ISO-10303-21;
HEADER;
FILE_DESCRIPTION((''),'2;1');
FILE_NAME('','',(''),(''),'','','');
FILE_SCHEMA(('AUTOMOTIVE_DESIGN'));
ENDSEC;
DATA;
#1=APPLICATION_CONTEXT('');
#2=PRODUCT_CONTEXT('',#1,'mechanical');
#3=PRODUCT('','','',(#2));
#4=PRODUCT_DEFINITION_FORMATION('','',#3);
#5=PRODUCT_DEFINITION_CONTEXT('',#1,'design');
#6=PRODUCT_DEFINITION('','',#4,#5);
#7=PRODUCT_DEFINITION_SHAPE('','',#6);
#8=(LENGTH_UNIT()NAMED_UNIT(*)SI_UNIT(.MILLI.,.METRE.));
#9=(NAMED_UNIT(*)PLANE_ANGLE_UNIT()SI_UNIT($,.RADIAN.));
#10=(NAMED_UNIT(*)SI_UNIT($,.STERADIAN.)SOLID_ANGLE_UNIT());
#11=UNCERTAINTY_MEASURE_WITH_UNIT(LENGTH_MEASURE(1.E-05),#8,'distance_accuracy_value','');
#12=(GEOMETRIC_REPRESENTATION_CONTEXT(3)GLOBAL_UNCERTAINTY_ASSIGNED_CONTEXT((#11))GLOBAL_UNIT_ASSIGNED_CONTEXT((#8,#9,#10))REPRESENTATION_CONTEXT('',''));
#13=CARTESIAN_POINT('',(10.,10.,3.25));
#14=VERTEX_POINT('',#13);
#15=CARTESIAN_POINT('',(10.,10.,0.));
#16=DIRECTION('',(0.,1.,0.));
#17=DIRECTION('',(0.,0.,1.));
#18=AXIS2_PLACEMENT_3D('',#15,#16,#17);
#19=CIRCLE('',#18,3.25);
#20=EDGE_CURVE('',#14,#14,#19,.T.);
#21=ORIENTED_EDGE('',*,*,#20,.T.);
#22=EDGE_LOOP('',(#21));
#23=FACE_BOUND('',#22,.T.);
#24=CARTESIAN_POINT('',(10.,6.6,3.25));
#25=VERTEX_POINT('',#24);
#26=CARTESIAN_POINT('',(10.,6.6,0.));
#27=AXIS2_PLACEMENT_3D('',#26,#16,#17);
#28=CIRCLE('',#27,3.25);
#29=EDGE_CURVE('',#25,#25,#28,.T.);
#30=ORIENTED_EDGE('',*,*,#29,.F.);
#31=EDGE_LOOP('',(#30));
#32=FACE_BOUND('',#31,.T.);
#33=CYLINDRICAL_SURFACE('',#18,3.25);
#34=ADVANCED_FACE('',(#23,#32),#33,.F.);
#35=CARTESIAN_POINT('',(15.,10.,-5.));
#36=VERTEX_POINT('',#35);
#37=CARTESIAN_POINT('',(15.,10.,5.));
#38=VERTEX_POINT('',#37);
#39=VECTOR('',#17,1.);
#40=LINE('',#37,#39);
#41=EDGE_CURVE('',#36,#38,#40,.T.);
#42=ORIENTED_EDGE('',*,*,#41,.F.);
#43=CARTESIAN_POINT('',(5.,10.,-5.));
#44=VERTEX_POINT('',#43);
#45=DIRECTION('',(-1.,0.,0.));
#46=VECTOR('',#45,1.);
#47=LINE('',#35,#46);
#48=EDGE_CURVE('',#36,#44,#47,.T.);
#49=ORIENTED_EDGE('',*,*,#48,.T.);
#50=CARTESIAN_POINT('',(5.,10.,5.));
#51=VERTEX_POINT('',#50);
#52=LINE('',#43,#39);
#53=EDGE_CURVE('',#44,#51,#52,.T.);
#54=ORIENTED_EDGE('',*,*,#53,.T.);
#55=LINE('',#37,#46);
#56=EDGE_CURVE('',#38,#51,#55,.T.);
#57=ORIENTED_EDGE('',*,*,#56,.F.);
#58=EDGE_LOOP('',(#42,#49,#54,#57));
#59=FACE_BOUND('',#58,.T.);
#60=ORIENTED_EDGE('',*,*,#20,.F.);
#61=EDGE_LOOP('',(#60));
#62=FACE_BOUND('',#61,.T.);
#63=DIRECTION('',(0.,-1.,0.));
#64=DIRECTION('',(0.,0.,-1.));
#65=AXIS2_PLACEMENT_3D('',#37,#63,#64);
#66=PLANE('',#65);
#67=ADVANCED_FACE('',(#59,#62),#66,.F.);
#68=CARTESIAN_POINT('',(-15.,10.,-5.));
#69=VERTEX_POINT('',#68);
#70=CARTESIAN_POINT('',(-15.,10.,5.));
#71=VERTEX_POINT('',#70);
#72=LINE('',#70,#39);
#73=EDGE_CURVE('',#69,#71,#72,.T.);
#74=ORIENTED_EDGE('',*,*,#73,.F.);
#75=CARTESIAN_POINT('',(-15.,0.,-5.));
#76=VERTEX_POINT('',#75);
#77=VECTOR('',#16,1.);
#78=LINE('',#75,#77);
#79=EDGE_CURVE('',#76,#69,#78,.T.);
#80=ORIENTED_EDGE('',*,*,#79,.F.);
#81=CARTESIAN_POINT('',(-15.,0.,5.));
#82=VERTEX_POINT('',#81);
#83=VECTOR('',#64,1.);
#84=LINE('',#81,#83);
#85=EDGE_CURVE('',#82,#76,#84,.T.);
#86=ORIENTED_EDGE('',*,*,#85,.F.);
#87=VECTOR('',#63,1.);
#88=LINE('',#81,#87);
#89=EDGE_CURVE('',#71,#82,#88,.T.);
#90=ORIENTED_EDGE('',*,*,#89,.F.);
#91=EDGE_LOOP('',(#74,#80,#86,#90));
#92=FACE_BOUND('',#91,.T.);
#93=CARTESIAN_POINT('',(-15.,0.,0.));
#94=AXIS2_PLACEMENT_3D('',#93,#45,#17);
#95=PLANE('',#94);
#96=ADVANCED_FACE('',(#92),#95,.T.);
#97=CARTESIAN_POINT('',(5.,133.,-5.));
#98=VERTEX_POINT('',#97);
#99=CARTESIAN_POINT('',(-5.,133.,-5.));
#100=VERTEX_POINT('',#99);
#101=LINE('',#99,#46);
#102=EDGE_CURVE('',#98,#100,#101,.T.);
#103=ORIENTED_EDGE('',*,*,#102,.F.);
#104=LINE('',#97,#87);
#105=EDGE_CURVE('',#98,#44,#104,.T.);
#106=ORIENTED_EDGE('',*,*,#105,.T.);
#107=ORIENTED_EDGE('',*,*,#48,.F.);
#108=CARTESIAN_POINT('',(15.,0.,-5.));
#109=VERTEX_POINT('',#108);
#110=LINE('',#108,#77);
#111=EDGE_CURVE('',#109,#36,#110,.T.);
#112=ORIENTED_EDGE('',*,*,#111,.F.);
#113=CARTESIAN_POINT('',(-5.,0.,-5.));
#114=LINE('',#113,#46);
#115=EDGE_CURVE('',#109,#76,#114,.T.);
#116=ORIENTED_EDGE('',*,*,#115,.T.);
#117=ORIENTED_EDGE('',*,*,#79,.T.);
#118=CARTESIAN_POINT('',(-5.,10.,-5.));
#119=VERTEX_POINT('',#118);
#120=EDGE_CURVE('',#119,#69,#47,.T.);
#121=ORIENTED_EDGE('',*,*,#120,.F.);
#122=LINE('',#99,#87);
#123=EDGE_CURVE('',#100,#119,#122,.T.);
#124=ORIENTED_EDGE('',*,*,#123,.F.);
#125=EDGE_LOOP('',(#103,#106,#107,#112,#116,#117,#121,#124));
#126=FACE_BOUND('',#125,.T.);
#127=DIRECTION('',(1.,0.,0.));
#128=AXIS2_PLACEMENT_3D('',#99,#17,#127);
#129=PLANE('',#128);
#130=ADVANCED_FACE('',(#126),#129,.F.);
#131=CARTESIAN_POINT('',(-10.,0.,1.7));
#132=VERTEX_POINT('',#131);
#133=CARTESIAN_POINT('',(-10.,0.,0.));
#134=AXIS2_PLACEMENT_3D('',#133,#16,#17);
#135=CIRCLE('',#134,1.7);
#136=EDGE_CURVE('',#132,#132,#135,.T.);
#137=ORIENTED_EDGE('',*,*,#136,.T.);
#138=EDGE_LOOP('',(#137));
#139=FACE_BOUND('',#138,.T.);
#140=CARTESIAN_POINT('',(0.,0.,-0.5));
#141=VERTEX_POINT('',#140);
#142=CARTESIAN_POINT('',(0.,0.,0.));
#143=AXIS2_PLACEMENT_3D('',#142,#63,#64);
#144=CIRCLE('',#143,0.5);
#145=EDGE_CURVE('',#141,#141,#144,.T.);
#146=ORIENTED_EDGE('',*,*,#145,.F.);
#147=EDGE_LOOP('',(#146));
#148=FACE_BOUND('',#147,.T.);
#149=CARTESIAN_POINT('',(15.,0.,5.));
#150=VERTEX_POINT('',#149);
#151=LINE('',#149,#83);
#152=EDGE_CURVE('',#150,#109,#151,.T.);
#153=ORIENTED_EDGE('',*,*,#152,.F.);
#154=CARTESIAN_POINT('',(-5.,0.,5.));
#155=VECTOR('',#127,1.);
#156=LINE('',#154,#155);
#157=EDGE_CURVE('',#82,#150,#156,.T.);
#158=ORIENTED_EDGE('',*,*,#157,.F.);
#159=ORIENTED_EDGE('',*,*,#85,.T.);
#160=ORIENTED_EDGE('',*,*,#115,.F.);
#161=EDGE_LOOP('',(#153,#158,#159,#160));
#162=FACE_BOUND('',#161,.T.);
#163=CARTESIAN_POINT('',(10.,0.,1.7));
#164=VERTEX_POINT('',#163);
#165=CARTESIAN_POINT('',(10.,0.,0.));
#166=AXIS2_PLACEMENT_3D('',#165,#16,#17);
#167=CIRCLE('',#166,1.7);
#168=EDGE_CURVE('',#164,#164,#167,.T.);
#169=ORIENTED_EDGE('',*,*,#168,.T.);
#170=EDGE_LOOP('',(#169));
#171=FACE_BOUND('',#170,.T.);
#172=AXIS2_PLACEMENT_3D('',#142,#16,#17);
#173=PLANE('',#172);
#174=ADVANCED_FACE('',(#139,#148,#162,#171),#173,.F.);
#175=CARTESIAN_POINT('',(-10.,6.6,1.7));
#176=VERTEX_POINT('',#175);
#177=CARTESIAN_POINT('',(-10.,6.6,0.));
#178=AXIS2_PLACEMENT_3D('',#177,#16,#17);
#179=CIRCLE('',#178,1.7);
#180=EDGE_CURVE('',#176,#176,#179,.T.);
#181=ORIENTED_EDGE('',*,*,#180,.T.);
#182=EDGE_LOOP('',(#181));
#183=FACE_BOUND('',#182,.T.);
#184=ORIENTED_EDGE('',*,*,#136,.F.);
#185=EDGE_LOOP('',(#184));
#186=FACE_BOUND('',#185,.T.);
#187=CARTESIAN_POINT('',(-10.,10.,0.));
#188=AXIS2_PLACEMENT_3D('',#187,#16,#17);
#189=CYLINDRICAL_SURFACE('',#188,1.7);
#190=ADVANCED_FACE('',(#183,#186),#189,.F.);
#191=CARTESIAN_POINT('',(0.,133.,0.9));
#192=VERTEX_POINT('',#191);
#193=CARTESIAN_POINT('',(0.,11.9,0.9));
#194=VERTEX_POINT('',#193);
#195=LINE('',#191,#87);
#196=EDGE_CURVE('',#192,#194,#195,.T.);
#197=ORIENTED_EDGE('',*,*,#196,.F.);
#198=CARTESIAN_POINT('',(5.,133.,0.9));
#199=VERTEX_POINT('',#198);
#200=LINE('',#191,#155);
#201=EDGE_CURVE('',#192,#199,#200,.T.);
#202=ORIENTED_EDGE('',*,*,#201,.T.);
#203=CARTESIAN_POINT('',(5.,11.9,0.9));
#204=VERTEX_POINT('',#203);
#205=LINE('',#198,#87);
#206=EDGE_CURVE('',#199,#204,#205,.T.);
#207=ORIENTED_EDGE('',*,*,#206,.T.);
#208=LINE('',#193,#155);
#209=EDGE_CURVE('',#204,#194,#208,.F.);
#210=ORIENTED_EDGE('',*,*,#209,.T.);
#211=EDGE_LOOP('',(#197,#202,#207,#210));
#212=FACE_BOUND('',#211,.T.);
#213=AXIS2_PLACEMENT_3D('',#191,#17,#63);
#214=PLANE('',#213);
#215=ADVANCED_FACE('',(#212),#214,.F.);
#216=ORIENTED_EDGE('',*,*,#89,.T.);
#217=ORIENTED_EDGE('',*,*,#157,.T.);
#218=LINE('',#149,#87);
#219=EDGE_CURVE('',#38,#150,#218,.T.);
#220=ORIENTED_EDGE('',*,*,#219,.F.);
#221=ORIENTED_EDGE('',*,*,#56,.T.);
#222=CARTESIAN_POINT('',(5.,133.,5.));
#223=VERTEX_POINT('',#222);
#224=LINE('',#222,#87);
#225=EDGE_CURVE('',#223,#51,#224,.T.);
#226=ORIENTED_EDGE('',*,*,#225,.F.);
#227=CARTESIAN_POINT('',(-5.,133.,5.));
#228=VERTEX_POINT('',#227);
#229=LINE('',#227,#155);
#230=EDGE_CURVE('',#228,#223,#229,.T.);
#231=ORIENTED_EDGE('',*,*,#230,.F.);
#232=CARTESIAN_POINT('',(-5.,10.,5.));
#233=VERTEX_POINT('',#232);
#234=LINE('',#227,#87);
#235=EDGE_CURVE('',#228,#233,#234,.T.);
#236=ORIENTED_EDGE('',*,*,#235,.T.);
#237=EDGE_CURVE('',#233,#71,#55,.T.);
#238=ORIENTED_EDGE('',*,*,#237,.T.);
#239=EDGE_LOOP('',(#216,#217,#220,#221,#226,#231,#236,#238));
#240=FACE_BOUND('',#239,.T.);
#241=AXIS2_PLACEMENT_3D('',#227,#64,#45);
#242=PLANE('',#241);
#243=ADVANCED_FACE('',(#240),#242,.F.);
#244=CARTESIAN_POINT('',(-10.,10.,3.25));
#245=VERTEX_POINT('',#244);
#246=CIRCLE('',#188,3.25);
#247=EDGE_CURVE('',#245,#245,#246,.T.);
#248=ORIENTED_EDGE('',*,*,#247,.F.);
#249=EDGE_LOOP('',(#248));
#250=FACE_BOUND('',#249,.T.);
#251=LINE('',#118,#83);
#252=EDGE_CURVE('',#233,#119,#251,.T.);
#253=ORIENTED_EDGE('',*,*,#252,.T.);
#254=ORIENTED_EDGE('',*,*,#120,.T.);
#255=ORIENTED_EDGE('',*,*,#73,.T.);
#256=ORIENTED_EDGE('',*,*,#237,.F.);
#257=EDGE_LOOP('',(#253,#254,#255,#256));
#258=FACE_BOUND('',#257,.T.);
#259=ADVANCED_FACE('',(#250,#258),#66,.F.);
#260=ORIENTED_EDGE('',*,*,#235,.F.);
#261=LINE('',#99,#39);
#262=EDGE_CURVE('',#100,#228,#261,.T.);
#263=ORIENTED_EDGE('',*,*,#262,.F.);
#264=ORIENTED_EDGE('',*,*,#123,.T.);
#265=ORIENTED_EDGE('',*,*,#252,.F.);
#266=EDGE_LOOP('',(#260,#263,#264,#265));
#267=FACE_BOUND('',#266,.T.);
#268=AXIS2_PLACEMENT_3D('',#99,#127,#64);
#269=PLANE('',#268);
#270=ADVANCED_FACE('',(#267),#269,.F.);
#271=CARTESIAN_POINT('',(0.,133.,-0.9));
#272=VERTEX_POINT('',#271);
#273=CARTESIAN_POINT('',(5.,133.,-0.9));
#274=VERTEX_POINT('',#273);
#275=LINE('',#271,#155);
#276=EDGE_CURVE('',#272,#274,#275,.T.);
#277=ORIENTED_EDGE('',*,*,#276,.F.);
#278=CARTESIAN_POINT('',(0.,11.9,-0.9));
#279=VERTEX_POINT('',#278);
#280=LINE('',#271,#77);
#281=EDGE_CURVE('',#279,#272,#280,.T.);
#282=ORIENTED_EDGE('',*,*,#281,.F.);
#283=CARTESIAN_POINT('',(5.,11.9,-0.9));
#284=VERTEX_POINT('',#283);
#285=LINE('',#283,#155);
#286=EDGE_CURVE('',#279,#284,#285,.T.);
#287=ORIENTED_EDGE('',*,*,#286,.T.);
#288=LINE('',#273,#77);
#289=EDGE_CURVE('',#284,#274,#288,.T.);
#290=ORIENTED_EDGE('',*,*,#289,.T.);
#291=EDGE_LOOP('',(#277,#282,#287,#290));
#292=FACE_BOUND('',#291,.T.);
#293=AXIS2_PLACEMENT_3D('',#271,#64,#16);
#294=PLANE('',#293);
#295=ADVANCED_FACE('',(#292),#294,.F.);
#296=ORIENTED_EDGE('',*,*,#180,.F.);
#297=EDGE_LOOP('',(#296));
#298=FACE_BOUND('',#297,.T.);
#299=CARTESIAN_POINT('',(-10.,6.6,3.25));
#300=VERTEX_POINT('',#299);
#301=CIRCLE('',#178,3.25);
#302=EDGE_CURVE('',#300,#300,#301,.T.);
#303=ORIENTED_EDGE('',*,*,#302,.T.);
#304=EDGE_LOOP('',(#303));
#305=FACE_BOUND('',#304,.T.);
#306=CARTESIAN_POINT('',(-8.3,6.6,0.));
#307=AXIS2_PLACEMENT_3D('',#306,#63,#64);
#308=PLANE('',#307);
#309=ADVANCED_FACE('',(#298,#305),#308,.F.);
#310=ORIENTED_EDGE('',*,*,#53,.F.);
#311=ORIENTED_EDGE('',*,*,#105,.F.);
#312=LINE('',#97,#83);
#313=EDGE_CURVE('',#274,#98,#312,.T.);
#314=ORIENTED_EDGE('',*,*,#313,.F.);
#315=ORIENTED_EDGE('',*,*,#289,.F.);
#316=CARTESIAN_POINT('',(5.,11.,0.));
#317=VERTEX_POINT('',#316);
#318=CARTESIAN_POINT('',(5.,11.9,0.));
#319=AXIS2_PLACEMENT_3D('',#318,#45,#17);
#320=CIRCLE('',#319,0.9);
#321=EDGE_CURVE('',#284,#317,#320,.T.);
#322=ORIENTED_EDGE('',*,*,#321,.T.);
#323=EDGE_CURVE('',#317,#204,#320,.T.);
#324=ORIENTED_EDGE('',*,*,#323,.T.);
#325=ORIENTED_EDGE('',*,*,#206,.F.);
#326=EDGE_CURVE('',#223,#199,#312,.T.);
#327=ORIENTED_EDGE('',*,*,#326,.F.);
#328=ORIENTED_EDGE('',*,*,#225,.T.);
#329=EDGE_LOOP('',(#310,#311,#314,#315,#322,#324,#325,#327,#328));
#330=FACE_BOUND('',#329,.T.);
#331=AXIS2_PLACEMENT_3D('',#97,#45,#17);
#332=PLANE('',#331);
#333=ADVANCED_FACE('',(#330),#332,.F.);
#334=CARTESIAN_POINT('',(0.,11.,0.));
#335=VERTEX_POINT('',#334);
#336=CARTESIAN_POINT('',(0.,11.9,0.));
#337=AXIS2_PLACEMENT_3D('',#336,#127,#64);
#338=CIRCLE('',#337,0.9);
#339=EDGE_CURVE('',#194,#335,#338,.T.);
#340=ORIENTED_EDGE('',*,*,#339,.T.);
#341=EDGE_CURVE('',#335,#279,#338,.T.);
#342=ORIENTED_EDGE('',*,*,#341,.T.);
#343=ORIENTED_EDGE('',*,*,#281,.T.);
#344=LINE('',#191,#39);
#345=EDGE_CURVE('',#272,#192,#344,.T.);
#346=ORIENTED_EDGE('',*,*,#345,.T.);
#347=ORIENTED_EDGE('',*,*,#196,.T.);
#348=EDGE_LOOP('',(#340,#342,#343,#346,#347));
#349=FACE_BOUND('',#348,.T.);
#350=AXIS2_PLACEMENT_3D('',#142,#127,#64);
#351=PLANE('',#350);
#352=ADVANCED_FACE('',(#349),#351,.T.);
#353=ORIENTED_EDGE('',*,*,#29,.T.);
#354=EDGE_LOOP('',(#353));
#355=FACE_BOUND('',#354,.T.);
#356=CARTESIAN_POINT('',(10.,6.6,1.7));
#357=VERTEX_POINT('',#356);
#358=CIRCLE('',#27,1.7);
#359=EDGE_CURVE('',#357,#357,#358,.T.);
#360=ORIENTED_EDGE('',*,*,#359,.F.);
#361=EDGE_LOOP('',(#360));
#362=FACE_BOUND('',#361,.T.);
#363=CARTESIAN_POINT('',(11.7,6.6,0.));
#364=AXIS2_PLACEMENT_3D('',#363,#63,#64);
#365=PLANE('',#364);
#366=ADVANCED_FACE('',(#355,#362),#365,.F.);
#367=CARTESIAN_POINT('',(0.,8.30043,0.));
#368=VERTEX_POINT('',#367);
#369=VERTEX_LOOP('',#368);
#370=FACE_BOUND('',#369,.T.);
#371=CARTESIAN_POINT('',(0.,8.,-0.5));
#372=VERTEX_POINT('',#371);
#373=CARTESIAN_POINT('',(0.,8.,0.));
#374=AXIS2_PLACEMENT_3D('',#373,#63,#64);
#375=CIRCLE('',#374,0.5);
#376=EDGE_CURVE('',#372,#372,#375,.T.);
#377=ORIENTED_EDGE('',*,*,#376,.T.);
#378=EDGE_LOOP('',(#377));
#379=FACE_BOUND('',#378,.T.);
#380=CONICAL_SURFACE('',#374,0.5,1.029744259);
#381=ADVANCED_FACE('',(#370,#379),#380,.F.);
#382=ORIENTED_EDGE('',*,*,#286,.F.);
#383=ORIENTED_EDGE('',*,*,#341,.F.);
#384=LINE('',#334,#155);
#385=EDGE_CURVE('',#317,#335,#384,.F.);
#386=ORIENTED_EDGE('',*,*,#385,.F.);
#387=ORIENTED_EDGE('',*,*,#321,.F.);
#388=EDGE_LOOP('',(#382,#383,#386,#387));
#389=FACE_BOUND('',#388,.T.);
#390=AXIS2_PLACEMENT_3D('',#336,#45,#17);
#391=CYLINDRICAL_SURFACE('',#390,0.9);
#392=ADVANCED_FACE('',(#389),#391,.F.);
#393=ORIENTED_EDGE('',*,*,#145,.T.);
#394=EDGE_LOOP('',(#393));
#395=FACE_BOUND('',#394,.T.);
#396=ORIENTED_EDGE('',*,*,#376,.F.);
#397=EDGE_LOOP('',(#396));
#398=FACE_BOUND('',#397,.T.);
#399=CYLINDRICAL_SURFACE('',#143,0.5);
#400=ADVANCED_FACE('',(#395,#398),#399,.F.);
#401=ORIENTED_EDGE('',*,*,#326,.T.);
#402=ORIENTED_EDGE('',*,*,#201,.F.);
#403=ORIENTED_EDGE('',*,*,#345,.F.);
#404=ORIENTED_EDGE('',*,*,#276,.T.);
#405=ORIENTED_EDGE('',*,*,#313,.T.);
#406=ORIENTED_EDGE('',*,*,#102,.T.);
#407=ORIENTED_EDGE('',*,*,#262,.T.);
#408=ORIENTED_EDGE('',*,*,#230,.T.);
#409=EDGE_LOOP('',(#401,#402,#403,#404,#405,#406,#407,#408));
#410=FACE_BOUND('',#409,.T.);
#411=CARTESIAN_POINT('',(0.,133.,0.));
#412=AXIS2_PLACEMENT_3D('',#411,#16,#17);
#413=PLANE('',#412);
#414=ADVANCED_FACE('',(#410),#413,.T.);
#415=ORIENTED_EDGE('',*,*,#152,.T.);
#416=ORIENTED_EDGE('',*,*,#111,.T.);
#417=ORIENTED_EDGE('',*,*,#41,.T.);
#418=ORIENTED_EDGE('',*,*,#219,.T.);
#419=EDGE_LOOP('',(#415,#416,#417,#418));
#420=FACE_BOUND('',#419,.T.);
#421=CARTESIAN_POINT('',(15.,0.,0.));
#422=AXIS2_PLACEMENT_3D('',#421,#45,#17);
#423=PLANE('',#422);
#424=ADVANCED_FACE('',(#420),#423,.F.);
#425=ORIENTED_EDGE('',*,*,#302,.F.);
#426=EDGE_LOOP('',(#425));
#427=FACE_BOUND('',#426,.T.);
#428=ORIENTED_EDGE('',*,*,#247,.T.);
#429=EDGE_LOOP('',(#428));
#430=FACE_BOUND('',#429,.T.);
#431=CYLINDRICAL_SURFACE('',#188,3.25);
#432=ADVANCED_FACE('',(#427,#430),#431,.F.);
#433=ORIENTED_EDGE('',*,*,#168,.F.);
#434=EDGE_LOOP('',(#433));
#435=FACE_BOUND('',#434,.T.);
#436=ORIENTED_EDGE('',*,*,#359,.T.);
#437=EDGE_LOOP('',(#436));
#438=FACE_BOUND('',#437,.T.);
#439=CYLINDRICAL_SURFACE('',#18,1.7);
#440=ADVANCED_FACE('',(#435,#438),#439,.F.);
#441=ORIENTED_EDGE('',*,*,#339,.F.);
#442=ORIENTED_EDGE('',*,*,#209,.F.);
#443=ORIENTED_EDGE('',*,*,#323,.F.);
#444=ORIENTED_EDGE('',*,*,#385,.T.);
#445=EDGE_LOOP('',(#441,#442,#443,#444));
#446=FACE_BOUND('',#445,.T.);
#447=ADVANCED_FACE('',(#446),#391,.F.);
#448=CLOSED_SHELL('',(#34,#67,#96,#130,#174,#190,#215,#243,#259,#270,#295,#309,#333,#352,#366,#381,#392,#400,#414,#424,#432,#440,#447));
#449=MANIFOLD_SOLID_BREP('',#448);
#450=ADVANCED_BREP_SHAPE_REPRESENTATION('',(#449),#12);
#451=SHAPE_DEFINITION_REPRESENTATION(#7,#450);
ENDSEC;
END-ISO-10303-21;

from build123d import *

# Parameters (mm, degrees)
SKETCH1_W                                           = 10
SKETCH1_H                                           = 10
BOSS_EXTRUDE1_DEPTH                                 = 133
SKETCH3_W                                           = 1.8
SKETCH3_H                                           = 122
CUT_EXTRUDE1_DEPTH                                  = 5
FILLET1_R                                           = 0.9
SKETCH4_W                                           = 10
SKETCH4_H                                           = 10
BOSS_EXTRUDE3_DEPTH                                 = 15
CBORE_FOR_M3_HEX_SOCKET_HEAD_CAP_SCREW1_D           = 3.4
CBORE_FOR_M3_HEX_SOCKET_HEAD_CAP_SCREW1_CBORE_D     = 6.5
CBORE_FOR_M3_HEX_SOCKET_HEAD_CAP_SCREW1_CBORE_DEPTH = 3.4
F_1_0MM_DOWEL_HOLE1_D                               = 1
F_1_0MM_DOWEL_HOLE1_DEPTH                           = 8
F_1_0MM_DOWEL_HOLE1_TIP                             = 0.30043031


with BuildPart() as part:
    # Sketch1 → Boss-Extrude1 (new body)
    with BuildSketch(Plane(origin=(0, 0, 0), x_dir=(1, 0, 0), z_dir=(0, 1, 0))):
        Rectangle(SKETCH1_W, SKETCH1_H)
    extrude(amount=BOSS_EXTRUDE1_DEPTH)

    # Sketch3 → Cut-Extrude1 (cut)
    with BuildSketch(Plane(origin=(5, 0, 0), x_dir=(0, 0, -1), z_dir=(1, 0, 0))):
        with Locations((0, 72)):
            Rectangle(SKETCH3_W, SKETCH3_H)
    extrude(amount=-CUT_EXTRUDE1_DEPTH, mode=Mode.SUBTRACT)

    # Fillet1
    fillet1_edges = [part.edges().sort_by_distance(p)[0] for p in [
        (2.5, 11, 0.9),
        (2.5, 11, -0.9),
    ]]
    fillet(fillet1_edges, radius=FILLET1_R - 0.0001)  # a hair under: the kernel refuses the full size

    # Sketch4 → Boss-Extrude3 (add, symmetric)
    with BuildSketch(Plane(origin=(0, 0, 0), x_dir=(0, 0, -1), z_dir=(1, 0, 0))):
        with Locations((0, 5)):
            Rectangle(SKETCH4_W, SKETCH4_H)
    extrude(amount=BOSS_EXTRUDE3_DEPTH, both=True)

    # CBORE for M3 Hex Socket Head Cap Screw1 (through all)
    with Locations(Plane(origin=(10, 10, 0), x_dir=(0, 0, 1), z_dir=(0, 1, 0))):
        with Locations((0, 0)):
            cbore_for_m3_hex_socket_head_cap_screw1 = CounterBoreHole(CBORE_FOR_M3_HEX_SOCKET_HEAD_CAP_SCREW1_D / 2, CBORE_FOR_M3_HEX_SOCKET_HEAD_CAP_SCREW1_CBORE_D / 2, CBORE_FOR_M3_HEX_SOCKET_HEAD_CAP_SCREW1_CBORE_DEPTH)

    # Mirror1: CBORE for M3 Hex Socket Head Cap Screw1 across plane
    add(cbore_for_m3_hex_socket_head_cap_screw1.mirror(Plane(origin=(0, 0, 0), x_dir=(0, 0, 1), z_dir=(1, 0, 0))), mode=Mode.SUBTRACT)

    # Ø1.0mm Dowel Hole1
    with Locations(Plane(origin=(0, 0, 0), x_dir=(0, 0, -1), z_dir=(0, -1, 0))):
        with Locations((0, 0)):
            Hole(F_1_0MM_DOWEL_HOLE1_D / 2, depth=F_1_0MM_DOWEL_HOLE1_DEPTH)
            with Locations((0, 0, -(F_1_0MM_DOWEL_HOLE1_DEPTH + F_1_0MM_DOWEL_HOLE1_TIP / 2))):  # 118° drill point
                Cone(0, F_1_0MM_DOWEL_HOLE1_D / 2, F_1_0MM_DOWEL_HOLE1_TIP, mode=Mode.SUBTRACT)


solid = part.part
